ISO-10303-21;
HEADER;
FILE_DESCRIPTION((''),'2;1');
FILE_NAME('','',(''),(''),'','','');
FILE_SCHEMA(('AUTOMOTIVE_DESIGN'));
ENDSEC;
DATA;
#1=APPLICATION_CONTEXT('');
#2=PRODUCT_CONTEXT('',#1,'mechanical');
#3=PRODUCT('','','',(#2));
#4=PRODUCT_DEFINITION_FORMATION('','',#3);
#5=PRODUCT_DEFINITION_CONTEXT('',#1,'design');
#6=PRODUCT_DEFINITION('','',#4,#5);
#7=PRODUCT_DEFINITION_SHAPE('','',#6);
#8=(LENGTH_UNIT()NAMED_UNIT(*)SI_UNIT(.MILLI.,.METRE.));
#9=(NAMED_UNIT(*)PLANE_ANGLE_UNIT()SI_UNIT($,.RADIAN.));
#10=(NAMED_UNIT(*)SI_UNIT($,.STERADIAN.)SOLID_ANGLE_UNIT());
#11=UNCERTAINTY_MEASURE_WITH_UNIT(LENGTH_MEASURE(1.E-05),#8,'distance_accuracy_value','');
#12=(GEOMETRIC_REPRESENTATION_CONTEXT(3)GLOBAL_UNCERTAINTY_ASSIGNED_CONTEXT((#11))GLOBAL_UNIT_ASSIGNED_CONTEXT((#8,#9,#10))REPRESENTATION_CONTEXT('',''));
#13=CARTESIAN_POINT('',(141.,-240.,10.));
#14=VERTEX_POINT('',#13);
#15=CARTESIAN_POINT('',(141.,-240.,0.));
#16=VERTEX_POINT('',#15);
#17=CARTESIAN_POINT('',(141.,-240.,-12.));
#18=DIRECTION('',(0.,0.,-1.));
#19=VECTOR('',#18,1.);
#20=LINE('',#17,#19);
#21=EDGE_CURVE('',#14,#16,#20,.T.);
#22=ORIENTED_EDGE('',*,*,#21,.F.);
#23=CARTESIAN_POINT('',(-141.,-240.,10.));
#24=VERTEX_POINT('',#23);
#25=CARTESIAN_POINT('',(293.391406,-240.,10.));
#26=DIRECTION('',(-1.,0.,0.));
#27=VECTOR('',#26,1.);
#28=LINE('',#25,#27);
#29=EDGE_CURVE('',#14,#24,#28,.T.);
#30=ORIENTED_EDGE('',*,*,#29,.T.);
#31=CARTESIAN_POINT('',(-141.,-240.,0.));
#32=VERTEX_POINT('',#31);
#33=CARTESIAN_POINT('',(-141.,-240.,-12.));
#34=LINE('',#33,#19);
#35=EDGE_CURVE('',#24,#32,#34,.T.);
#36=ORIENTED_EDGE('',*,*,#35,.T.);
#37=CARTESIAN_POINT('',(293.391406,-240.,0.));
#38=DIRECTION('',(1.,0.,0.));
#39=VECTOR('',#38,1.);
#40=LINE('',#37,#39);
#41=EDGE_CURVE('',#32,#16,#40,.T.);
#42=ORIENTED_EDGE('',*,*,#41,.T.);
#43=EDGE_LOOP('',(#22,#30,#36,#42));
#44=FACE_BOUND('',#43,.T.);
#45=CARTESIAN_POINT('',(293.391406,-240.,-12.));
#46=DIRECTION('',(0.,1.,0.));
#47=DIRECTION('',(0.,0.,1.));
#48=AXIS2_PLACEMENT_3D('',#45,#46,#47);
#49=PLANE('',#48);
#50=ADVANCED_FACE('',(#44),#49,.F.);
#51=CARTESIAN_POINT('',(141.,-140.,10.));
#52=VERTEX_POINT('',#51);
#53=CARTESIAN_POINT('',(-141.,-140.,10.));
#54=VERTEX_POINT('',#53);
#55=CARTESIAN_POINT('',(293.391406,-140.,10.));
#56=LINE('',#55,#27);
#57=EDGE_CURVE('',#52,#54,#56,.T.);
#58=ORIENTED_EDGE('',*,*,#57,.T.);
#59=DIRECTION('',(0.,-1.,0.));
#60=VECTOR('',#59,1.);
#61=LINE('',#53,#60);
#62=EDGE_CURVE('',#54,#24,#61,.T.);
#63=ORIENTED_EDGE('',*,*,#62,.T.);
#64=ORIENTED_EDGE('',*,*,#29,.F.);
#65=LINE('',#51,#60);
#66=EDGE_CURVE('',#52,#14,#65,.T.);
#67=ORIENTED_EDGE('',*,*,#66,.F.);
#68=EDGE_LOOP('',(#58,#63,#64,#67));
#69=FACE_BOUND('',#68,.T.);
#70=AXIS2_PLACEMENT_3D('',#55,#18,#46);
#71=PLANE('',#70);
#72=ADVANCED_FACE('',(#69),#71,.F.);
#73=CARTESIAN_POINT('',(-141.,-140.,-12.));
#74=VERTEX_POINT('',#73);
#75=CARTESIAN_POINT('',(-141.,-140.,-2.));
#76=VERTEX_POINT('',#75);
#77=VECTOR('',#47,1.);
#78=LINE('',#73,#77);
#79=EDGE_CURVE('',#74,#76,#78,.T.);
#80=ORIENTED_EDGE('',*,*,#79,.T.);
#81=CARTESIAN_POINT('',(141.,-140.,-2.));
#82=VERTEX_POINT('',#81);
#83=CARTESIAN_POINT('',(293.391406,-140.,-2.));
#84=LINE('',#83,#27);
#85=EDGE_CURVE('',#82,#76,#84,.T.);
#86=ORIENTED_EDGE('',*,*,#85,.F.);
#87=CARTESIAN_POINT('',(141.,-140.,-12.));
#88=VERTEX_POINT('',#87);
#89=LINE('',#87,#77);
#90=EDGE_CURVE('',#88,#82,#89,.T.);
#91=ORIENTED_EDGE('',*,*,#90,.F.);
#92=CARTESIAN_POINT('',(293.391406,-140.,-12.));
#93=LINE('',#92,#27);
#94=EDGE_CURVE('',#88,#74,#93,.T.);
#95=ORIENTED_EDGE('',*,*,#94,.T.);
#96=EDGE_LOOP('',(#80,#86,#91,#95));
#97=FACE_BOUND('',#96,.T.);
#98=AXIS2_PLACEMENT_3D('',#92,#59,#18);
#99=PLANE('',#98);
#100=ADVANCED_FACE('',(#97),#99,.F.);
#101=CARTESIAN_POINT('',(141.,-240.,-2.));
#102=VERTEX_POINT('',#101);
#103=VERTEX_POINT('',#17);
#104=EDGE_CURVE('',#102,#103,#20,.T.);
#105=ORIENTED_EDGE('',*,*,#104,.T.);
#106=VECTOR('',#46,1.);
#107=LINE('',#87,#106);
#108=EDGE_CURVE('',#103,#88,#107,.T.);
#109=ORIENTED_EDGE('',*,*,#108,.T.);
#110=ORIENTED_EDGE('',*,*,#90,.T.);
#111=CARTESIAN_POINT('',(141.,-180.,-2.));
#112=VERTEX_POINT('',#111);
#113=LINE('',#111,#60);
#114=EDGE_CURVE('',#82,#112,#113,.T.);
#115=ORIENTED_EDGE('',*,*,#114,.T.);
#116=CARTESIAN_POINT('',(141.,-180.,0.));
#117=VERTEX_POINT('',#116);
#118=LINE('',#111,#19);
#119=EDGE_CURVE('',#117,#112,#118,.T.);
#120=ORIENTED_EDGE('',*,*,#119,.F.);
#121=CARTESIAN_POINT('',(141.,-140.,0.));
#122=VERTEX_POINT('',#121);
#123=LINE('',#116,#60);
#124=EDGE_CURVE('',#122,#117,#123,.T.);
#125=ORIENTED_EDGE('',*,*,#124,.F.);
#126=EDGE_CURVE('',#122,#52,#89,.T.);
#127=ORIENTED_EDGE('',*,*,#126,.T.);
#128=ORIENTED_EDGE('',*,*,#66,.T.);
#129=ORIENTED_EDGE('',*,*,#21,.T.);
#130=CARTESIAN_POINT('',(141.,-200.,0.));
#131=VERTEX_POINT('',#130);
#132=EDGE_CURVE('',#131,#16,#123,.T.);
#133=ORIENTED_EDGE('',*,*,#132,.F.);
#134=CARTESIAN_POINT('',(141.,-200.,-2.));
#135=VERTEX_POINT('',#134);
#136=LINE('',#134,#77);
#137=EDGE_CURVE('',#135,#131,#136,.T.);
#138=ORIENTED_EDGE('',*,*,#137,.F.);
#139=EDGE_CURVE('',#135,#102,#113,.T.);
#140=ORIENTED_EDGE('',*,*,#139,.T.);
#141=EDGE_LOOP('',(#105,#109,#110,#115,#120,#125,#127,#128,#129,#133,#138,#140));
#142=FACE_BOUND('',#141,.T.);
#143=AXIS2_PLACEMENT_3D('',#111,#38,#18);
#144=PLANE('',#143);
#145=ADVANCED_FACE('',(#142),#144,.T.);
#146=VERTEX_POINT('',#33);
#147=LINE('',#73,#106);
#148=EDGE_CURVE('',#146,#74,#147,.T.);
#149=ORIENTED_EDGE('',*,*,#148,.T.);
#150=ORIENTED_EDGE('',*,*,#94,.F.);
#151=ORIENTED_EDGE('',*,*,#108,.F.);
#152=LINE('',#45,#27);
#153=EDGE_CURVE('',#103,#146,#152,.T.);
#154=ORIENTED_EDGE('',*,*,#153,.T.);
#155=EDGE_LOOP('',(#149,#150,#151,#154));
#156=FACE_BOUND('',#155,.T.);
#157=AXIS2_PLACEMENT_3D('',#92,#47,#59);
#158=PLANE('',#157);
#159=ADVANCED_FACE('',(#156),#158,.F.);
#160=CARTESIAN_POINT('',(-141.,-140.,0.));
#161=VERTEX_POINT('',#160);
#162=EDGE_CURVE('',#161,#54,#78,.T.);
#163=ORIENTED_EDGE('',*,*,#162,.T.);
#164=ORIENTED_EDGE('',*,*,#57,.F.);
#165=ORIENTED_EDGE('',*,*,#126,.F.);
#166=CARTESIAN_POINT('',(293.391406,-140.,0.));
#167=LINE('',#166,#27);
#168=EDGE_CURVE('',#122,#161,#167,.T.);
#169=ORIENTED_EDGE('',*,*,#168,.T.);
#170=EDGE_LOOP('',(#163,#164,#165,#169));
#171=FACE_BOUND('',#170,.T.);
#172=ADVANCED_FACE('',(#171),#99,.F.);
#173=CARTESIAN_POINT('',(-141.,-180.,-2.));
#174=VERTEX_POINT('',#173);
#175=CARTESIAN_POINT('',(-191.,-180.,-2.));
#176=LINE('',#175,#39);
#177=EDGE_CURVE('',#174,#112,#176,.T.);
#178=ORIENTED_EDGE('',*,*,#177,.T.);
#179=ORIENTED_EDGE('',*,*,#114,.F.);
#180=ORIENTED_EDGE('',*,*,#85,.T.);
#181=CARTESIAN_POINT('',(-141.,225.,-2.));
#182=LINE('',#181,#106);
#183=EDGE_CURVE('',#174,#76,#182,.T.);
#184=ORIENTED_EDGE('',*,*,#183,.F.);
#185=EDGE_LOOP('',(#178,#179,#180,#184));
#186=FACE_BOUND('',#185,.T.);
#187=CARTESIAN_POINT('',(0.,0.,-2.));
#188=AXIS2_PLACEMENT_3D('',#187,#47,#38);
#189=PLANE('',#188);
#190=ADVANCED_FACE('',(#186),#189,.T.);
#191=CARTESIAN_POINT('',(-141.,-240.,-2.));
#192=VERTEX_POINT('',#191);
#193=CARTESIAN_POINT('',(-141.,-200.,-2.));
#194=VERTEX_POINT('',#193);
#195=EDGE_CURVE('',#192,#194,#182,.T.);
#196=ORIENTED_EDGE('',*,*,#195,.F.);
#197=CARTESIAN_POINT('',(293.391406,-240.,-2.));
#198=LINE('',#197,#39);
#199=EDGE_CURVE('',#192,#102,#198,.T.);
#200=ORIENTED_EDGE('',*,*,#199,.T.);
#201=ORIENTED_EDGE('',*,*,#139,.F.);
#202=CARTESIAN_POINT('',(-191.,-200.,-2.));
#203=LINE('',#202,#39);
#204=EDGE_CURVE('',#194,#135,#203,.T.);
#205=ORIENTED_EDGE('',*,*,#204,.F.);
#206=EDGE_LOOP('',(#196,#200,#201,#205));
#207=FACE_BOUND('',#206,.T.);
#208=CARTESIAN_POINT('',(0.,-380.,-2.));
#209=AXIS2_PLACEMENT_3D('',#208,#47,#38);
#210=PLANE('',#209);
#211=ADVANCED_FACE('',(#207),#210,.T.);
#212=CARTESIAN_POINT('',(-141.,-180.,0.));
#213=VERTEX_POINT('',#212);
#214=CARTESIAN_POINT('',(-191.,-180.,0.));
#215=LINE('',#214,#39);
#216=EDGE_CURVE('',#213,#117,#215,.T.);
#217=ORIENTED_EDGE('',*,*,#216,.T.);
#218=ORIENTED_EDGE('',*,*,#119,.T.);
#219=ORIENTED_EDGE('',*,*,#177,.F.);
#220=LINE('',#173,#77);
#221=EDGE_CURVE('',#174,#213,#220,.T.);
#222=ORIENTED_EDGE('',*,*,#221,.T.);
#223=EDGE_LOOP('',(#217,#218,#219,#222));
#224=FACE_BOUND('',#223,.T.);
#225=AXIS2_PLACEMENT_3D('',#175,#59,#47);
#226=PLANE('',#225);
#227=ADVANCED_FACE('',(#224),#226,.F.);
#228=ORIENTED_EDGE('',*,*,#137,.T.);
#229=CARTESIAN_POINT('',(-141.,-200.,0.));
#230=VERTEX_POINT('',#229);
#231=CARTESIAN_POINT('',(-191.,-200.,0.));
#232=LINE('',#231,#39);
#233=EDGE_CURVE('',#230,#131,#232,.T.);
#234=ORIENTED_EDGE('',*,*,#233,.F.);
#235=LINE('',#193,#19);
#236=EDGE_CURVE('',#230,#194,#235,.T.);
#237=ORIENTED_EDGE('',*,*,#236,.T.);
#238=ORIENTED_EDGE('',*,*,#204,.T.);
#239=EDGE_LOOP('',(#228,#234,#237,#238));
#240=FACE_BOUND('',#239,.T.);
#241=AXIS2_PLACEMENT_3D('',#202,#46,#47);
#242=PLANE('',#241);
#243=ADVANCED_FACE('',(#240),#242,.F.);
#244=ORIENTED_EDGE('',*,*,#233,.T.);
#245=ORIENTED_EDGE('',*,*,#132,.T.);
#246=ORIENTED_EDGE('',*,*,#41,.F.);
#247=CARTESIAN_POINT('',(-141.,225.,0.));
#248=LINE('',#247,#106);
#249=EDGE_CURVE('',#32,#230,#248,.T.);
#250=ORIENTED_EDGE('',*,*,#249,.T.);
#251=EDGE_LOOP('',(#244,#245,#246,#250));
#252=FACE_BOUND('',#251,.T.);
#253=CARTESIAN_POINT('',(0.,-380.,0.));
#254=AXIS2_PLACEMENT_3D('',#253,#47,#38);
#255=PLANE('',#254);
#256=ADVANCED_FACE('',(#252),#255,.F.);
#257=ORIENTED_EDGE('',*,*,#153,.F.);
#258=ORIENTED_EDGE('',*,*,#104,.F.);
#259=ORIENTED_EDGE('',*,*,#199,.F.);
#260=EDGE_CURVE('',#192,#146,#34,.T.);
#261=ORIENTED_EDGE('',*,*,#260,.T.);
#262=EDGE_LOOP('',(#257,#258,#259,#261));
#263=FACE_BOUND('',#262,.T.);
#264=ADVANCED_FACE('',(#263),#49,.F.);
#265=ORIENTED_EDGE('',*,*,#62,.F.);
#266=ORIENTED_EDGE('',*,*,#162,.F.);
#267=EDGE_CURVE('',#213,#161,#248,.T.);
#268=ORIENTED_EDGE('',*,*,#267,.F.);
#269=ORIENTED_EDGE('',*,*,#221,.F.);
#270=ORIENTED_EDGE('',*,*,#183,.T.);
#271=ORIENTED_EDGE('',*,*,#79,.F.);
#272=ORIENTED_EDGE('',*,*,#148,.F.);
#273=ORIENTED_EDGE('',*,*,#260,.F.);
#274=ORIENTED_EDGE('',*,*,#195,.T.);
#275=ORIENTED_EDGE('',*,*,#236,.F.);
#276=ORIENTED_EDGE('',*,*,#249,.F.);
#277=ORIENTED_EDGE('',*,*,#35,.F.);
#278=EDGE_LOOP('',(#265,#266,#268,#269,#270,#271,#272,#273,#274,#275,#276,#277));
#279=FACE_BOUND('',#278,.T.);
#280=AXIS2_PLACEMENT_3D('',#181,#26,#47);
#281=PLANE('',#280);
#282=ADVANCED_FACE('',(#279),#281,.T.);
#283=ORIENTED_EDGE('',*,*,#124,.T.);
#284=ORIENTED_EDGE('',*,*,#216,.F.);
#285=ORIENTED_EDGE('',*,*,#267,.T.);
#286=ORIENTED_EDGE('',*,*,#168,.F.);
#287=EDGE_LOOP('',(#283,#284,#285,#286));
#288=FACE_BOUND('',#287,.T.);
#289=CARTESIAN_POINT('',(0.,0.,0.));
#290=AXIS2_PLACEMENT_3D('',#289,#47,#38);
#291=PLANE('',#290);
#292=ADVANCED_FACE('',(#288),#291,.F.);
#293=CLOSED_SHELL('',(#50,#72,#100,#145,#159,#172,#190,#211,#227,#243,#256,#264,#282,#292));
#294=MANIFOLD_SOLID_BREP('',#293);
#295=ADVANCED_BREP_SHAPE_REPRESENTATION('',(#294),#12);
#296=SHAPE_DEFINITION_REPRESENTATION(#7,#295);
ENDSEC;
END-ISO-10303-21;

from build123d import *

# Parameters (mm, degrees)
BOSS_EXTRUDE1_DEPTH      = 141
BOSS_EXTRUDE1_DEPTH_BACK = 141
SKETCH1_W                = 22
SKETCH1_H                = 100
CAVITY1_START            = -2
CAVITY1_OUTLINE_W        = 282
CAVITY1_OUTLINE_H        = 40
CAVITY1_DEPTH            = 2


# Read off the part's stored shape, not the designer's step: Cavity1
with BuildPart() as part:
    # Sketch1 → Boss-Extrude1 (new, two sides: drawn at the far end of the back side and taken through both)
    with BuildSketch(Plane(origin=(0, 0, 0), x_dir=(0, 0, -1), z_dir=(1, 0, 0)).offset(-BOSS_EXTRUDE1_DEPTH_BACK)):
        with Locations((1, -190)):
            Rectangle(SKETCH1_W, SKETCH1_H)
    extrude(amount=BOSS_EXTRUDE1_DEPTH + BOSS_EXTRUDE1_DEPTH_BACK)

    # Cavity1 outline → Cavity1 (cut)
    with BuildSketch(Plane.XY.offset(CAVITY1_START)):
        with Locations((0, -160)):
            Rectangle(CAVITY1_OUTLINE_W, CAVITY1_OUTLINE_H)
    cavity1 = extrude(amount=CAVITY1_DEPTH, mode=Mode.SUBTRACT)

    # Mirror1: Cavity1 across plane
    add(cavity1.mirror(Plane.ZX.offset(-190)), mode=Mode.SUBTRACT)


solid = part.part
